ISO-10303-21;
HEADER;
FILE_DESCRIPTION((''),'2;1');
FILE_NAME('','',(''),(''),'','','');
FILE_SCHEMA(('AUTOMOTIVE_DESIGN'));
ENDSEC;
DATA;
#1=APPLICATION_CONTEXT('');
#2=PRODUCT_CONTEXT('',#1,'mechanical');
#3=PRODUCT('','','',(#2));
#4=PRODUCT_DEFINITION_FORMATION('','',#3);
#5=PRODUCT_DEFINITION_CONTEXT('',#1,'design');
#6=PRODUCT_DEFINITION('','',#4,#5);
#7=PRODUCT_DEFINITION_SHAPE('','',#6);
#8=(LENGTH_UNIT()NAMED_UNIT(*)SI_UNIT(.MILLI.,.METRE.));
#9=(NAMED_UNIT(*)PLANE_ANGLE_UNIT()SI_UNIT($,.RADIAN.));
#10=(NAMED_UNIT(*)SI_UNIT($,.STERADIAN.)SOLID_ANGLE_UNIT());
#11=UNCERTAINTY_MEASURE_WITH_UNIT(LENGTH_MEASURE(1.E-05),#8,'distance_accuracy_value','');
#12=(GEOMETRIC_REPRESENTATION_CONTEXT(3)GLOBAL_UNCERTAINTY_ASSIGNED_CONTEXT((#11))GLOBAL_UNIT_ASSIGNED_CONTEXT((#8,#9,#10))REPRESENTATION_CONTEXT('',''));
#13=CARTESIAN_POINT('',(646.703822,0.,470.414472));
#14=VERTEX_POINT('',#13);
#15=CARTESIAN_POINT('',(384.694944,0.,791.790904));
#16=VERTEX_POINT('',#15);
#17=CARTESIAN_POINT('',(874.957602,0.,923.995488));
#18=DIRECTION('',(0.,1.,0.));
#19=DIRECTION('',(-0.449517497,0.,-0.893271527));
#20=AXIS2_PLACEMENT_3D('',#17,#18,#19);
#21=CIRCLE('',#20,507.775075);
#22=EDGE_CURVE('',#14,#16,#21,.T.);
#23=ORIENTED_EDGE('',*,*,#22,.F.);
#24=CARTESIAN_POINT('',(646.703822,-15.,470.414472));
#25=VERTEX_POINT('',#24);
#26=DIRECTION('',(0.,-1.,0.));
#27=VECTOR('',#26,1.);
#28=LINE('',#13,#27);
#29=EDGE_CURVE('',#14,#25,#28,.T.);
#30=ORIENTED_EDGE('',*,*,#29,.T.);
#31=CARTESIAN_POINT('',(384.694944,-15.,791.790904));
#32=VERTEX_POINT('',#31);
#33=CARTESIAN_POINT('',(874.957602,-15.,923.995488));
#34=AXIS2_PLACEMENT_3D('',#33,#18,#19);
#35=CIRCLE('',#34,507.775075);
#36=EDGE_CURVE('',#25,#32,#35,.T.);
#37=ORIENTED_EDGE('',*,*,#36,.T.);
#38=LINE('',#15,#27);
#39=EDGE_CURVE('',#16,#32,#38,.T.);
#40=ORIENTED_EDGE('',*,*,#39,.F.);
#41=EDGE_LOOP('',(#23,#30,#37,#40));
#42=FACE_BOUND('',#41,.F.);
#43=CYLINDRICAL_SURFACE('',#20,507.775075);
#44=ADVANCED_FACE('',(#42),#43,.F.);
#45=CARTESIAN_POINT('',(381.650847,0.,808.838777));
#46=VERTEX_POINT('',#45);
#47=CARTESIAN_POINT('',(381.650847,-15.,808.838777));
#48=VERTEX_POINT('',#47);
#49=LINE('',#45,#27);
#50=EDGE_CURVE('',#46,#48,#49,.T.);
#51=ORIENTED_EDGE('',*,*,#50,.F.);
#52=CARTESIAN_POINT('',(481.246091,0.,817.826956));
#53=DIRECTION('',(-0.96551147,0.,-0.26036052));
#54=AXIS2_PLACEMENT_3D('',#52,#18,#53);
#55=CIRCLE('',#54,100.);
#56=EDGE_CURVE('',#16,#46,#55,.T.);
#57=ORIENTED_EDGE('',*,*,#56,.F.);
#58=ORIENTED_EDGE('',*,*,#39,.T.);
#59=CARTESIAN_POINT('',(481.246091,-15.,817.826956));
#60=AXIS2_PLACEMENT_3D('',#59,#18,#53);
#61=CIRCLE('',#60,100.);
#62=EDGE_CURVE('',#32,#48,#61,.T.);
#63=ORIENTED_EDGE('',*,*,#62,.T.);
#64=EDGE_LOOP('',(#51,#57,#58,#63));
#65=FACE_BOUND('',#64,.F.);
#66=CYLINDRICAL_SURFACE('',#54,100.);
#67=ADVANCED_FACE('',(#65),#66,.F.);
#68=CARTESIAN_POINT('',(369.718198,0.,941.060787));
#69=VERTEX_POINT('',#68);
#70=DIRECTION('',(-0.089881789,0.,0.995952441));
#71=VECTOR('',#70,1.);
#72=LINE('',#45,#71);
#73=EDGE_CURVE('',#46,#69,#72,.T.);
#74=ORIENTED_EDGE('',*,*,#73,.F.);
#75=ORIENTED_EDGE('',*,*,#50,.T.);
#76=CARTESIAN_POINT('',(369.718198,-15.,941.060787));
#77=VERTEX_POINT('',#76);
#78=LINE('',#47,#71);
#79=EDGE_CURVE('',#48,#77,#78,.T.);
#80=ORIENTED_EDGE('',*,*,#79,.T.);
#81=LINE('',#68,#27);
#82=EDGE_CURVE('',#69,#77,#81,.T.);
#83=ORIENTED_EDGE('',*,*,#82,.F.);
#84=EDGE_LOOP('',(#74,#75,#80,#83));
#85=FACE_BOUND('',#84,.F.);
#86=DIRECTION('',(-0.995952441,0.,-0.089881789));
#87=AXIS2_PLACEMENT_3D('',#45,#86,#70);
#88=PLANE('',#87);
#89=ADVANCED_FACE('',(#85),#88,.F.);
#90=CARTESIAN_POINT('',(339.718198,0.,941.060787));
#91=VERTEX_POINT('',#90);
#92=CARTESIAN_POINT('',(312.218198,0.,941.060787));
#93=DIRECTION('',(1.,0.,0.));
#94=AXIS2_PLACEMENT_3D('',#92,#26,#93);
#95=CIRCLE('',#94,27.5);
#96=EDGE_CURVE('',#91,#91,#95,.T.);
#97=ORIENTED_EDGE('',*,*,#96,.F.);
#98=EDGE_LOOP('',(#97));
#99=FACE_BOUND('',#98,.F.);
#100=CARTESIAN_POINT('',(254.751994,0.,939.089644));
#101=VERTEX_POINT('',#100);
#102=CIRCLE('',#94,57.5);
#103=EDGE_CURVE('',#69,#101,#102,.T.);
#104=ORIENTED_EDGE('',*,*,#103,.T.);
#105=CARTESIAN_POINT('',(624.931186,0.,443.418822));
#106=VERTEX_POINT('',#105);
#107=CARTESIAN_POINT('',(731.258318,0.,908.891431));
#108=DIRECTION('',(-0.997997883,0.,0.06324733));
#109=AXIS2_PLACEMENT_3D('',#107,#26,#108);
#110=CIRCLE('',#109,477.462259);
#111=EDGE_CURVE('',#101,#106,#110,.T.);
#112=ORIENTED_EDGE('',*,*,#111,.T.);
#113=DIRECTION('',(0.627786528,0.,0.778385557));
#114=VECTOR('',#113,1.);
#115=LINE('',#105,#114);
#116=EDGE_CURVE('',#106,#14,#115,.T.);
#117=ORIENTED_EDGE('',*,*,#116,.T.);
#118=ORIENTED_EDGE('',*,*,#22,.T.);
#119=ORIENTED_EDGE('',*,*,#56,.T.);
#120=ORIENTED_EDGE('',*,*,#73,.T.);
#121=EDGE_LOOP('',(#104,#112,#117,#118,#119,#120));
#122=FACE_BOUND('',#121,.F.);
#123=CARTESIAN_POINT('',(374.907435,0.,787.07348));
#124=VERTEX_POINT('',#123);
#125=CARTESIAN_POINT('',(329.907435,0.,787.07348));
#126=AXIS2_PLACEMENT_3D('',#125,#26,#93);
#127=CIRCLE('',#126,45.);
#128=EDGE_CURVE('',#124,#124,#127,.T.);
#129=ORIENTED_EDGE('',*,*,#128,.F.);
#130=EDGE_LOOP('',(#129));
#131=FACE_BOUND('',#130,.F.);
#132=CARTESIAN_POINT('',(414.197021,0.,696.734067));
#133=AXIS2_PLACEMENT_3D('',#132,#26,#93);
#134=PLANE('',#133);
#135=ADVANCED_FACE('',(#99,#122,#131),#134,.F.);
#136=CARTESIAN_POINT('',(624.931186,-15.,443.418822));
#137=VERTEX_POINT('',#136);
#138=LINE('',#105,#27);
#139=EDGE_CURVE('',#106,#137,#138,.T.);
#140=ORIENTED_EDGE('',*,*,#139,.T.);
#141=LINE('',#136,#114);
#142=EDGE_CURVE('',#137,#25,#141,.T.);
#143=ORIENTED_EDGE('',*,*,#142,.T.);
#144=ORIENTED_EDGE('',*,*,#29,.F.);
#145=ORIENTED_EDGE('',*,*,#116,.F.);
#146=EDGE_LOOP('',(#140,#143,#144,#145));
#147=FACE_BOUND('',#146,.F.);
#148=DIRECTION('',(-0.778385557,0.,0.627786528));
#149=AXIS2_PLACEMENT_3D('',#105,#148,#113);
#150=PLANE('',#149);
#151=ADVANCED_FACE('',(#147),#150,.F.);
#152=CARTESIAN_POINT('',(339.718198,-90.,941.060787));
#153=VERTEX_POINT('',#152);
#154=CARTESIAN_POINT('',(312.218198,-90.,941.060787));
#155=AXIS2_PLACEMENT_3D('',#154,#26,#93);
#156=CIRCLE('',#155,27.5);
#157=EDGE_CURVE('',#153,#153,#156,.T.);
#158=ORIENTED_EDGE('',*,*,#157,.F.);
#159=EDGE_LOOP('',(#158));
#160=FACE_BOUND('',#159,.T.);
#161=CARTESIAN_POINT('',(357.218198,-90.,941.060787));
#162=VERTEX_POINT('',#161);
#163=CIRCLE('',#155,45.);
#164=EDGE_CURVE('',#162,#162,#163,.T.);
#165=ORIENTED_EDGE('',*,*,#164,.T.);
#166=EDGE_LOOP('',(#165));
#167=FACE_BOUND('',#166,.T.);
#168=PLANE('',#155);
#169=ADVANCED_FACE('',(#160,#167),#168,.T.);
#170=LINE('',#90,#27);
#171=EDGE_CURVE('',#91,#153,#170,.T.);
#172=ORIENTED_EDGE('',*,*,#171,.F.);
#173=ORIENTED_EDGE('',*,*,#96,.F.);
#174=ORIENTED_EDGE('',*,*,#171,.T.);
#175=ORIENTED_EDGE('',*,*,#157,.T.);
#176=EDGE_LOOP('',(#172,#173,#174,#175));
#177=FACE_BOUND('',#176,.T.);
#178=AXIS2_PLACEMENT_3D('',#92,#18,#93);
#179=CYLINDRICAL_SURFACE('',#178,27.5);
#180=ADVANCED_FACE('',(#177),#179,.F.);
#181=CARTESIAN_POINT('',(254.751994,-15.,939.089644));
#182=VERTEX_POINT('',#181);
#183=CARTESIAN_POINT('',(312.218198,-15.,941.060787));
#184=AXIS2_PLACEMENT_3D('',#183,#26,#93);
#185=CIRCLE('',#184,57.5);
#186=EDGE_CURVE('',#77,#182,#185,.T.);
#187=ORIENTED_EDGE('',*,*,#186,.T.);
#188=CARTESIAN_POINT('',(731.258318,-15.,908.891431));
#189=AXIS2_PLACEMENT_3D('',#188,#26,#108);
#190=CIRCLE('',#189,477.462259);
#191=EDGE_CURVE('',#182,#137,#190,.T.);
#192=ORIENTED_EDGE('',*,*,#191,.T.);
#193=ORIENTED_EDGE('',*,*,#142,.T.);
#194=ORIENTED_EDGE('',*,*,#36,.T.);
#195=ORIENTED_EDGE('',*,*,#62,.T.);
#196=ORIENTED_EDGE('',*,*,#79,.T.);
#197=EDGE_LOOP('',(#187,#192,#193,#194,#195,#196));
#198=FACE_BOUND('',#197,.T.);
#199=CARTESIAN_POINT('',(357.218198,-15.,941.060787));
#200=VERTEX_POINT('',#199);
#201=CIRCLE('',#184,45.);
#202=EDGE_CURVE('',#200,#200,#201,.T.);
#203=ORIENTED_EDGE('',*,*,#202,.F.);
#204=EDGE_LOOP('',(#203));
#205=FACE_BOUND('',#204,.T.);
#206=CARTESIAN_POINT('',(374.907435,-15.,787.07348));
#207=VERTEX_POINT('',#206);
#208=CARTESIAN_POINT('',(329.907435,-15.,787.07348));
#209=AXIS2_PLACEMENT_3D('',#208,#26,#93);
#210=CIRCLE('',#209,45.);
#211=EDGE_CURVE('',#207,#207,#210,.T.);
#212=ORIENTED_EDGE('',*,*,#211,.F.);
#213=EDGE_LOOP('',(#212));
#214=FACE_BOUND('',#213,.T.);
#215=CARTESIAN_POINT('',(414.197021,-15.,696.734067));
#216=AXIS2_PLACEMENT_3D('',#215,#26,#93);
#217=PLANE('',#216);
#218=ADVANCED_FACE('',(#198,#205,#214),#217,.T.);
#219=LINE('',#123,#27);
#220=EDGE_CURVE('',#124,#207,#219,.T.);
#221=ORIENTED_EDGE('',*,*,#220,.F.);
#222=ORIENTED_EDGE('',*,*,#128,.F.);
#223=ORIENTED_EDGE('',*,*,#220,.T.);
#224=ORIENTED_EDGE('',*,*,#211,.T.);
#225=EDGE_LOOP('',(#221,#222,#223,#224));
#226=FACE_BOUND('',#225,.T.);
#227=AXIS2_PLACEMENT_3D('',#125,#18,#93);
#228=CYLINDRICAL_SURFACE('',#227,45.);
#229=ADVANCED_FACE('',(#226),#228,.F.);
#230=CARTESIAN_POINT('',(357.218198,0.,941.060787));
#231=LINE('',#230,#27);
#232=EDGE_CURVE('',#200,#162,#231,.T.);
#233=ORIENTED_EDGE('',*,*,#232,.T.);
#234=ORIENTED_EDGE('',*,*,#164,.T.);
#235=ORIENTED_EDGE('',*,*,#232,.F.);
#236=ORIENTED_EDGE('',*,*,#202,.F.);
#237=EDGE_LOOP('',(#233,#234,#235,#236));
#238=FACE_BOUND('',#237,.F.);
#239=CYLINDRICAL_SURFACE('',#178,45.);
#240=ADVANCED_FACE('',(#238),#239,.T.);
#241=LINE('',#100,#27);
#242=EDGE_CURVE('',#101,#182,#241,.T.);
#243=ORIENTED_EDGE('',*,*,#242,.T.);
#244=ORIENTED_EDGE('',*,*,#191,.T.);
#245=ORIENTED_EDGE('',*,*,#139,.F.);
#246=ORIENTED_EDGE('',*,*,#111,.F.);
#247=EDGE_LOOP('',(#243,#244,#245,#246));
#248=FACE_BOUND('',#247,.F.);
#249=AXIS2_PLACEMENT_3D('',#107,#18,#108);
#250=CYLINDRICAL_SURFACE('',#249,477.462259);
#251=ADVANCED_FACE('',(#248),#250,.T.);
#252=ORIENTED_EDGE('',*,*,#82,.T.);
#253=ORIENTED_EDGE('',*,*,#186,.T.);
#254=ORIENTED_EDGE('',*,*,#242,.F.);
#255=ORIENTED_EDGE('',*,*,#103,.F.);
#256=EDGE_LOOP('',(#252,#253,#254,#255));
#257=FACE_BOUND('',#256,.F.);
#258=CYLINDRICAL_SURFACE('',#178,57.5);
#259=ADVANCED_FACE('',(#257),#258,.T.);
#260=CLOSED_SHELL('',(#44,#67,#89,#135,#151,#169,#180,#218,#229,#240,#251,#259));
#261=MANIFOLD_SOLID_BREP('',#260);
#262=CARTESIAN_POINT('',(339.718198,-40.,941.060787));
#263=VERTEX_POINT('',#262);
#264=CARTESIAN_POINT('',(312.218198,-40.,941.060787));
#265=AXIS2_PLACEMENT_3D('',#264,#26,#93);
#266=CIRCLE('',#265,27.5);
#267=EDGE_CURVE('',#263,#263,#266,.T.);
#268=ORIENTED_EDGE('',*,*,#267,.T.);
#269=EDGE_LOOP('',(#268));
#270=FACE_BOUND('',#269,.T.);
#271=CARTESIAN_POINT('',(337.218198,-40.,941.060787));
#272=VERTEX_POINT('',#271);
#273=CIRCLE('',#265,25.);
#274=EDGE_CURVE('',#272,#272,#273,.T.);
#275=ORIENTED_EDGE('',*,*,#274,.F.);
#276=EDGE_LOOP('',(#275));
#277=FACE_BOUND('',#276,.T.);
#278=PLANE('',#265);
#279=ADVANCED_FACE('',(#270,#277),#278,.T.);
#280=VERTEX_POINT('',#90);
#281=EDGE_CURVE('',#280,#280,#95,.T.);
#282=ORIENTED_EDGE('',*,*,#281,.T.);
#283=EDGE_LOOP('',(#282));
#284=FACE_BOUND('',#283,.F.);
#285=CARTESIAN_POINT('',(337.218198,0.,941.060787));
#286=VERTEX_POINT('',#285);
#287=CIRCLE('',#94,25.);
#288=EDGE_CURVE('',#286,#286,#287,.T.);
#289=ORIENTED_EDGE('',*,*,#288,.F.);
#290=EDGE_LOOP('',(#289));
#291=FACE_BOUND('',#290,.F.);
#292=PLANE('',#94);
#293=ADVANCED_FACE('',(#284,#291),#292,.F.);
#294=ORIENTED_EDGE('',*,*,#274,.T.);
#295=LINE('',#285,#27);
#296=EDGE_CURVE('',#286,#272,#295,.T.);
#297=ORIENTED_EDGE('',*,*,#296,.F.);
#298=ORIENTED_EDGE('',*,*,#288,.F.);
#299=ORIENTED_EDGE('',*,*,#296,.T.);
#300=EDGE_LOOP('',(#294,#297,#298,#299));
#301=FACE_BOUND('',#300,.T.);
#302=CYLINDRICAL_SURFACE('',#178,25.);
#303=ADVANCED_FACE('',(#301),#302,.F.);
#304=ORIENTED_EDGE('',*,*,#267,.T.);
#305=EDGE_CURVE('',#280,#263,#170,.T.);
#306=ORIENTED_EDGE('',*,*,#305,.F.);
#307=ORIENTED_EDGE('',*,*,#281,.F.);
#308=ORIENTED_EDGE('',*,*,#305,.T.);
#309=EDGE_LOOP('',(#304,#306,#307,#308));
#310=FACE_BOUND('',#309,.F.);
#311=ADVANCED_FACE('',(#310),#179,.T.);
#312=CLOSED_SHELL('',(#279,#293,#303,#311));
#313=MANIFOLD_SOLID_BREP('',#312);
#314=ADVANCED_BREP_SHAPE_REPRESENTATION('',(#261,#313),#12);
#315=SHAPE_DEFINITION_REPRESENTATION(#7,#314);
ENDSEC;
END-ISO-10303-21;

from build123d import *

# Parameters (mm, degrees)
F0_R     = 45
F1_DEPTH = 15
F0_R_2   = 27.5
F0_R_3   = 25
F2_DEPTH = 40
F3_DEPTH = 90


# Not quite as in the source:
# - ends of sketch curves that miss each other by under 0.0002 mm in the source are joined


with BuildPart() as f1:
    # F0 (on Front) → F1 (new body)
    with BuildSketch(Plane.XZ):
        with BuildLine():
            ThreePointArc((384.6949439554, 791.790903988), (382.803167543, 800.2488212516), (381.650846946, 808.8387769951))
            Line((381.650846946, 808.8387769951), (369.718198, 941.060787))
            ThreePointArc((369.718198, 941.060787), (311.2324816498, 998.5523373642), (254.7519940599, 939.0896440021))
            ThreePointArc((254.7519940599, 939.0896440021), (348.7062296758, 623.1920986799), (624.9311859905, 443.4188219584))
            Line((624.9311859905, 443.4188219584), (646.703822, 470.414472))
            ThreePointArc((646.703822, 470.414472), (481.4005278043, 603.1398267524), (384.6949439554, 791.790903988))
        make_face()
        with Locations((329.907435, 787.07348)):
            Circle(F0_R, mode=Mode.SUBTRACT)
        with Locations((312.218198, 941.060787)):
            Circle(F0_R, mode=Mode.SUBTRACT)
    extrude(amount=F1_DEPTH)

    # F0 (on Front) → F3 (join)
    with BuildSketch(Plane.XZ):
        with Locations((312.218198, 941.060787)):
            Circle(F0_R)
        with Locations((312.218198, 941.060787)):
            Circle(F0_R_2, mode=Mode.SUBTRACT)
    extrude(amount=F3_DEPTH)


with BuildPart() as f2:
    # F0 (on Front) → F2 (new body)
    with BuildSketch(Plane.XZ):
        with Locations((312.218198, 941.060787)):
            Circle(F0_R_2)
        with Locations((312.218198, 941.060787)):
            Circle(F0_R_3, mode=Mode.SUBTRACT)
    extrude(amount=F2_DEPTH)


solid = Compound([f1.part, f2.part])
